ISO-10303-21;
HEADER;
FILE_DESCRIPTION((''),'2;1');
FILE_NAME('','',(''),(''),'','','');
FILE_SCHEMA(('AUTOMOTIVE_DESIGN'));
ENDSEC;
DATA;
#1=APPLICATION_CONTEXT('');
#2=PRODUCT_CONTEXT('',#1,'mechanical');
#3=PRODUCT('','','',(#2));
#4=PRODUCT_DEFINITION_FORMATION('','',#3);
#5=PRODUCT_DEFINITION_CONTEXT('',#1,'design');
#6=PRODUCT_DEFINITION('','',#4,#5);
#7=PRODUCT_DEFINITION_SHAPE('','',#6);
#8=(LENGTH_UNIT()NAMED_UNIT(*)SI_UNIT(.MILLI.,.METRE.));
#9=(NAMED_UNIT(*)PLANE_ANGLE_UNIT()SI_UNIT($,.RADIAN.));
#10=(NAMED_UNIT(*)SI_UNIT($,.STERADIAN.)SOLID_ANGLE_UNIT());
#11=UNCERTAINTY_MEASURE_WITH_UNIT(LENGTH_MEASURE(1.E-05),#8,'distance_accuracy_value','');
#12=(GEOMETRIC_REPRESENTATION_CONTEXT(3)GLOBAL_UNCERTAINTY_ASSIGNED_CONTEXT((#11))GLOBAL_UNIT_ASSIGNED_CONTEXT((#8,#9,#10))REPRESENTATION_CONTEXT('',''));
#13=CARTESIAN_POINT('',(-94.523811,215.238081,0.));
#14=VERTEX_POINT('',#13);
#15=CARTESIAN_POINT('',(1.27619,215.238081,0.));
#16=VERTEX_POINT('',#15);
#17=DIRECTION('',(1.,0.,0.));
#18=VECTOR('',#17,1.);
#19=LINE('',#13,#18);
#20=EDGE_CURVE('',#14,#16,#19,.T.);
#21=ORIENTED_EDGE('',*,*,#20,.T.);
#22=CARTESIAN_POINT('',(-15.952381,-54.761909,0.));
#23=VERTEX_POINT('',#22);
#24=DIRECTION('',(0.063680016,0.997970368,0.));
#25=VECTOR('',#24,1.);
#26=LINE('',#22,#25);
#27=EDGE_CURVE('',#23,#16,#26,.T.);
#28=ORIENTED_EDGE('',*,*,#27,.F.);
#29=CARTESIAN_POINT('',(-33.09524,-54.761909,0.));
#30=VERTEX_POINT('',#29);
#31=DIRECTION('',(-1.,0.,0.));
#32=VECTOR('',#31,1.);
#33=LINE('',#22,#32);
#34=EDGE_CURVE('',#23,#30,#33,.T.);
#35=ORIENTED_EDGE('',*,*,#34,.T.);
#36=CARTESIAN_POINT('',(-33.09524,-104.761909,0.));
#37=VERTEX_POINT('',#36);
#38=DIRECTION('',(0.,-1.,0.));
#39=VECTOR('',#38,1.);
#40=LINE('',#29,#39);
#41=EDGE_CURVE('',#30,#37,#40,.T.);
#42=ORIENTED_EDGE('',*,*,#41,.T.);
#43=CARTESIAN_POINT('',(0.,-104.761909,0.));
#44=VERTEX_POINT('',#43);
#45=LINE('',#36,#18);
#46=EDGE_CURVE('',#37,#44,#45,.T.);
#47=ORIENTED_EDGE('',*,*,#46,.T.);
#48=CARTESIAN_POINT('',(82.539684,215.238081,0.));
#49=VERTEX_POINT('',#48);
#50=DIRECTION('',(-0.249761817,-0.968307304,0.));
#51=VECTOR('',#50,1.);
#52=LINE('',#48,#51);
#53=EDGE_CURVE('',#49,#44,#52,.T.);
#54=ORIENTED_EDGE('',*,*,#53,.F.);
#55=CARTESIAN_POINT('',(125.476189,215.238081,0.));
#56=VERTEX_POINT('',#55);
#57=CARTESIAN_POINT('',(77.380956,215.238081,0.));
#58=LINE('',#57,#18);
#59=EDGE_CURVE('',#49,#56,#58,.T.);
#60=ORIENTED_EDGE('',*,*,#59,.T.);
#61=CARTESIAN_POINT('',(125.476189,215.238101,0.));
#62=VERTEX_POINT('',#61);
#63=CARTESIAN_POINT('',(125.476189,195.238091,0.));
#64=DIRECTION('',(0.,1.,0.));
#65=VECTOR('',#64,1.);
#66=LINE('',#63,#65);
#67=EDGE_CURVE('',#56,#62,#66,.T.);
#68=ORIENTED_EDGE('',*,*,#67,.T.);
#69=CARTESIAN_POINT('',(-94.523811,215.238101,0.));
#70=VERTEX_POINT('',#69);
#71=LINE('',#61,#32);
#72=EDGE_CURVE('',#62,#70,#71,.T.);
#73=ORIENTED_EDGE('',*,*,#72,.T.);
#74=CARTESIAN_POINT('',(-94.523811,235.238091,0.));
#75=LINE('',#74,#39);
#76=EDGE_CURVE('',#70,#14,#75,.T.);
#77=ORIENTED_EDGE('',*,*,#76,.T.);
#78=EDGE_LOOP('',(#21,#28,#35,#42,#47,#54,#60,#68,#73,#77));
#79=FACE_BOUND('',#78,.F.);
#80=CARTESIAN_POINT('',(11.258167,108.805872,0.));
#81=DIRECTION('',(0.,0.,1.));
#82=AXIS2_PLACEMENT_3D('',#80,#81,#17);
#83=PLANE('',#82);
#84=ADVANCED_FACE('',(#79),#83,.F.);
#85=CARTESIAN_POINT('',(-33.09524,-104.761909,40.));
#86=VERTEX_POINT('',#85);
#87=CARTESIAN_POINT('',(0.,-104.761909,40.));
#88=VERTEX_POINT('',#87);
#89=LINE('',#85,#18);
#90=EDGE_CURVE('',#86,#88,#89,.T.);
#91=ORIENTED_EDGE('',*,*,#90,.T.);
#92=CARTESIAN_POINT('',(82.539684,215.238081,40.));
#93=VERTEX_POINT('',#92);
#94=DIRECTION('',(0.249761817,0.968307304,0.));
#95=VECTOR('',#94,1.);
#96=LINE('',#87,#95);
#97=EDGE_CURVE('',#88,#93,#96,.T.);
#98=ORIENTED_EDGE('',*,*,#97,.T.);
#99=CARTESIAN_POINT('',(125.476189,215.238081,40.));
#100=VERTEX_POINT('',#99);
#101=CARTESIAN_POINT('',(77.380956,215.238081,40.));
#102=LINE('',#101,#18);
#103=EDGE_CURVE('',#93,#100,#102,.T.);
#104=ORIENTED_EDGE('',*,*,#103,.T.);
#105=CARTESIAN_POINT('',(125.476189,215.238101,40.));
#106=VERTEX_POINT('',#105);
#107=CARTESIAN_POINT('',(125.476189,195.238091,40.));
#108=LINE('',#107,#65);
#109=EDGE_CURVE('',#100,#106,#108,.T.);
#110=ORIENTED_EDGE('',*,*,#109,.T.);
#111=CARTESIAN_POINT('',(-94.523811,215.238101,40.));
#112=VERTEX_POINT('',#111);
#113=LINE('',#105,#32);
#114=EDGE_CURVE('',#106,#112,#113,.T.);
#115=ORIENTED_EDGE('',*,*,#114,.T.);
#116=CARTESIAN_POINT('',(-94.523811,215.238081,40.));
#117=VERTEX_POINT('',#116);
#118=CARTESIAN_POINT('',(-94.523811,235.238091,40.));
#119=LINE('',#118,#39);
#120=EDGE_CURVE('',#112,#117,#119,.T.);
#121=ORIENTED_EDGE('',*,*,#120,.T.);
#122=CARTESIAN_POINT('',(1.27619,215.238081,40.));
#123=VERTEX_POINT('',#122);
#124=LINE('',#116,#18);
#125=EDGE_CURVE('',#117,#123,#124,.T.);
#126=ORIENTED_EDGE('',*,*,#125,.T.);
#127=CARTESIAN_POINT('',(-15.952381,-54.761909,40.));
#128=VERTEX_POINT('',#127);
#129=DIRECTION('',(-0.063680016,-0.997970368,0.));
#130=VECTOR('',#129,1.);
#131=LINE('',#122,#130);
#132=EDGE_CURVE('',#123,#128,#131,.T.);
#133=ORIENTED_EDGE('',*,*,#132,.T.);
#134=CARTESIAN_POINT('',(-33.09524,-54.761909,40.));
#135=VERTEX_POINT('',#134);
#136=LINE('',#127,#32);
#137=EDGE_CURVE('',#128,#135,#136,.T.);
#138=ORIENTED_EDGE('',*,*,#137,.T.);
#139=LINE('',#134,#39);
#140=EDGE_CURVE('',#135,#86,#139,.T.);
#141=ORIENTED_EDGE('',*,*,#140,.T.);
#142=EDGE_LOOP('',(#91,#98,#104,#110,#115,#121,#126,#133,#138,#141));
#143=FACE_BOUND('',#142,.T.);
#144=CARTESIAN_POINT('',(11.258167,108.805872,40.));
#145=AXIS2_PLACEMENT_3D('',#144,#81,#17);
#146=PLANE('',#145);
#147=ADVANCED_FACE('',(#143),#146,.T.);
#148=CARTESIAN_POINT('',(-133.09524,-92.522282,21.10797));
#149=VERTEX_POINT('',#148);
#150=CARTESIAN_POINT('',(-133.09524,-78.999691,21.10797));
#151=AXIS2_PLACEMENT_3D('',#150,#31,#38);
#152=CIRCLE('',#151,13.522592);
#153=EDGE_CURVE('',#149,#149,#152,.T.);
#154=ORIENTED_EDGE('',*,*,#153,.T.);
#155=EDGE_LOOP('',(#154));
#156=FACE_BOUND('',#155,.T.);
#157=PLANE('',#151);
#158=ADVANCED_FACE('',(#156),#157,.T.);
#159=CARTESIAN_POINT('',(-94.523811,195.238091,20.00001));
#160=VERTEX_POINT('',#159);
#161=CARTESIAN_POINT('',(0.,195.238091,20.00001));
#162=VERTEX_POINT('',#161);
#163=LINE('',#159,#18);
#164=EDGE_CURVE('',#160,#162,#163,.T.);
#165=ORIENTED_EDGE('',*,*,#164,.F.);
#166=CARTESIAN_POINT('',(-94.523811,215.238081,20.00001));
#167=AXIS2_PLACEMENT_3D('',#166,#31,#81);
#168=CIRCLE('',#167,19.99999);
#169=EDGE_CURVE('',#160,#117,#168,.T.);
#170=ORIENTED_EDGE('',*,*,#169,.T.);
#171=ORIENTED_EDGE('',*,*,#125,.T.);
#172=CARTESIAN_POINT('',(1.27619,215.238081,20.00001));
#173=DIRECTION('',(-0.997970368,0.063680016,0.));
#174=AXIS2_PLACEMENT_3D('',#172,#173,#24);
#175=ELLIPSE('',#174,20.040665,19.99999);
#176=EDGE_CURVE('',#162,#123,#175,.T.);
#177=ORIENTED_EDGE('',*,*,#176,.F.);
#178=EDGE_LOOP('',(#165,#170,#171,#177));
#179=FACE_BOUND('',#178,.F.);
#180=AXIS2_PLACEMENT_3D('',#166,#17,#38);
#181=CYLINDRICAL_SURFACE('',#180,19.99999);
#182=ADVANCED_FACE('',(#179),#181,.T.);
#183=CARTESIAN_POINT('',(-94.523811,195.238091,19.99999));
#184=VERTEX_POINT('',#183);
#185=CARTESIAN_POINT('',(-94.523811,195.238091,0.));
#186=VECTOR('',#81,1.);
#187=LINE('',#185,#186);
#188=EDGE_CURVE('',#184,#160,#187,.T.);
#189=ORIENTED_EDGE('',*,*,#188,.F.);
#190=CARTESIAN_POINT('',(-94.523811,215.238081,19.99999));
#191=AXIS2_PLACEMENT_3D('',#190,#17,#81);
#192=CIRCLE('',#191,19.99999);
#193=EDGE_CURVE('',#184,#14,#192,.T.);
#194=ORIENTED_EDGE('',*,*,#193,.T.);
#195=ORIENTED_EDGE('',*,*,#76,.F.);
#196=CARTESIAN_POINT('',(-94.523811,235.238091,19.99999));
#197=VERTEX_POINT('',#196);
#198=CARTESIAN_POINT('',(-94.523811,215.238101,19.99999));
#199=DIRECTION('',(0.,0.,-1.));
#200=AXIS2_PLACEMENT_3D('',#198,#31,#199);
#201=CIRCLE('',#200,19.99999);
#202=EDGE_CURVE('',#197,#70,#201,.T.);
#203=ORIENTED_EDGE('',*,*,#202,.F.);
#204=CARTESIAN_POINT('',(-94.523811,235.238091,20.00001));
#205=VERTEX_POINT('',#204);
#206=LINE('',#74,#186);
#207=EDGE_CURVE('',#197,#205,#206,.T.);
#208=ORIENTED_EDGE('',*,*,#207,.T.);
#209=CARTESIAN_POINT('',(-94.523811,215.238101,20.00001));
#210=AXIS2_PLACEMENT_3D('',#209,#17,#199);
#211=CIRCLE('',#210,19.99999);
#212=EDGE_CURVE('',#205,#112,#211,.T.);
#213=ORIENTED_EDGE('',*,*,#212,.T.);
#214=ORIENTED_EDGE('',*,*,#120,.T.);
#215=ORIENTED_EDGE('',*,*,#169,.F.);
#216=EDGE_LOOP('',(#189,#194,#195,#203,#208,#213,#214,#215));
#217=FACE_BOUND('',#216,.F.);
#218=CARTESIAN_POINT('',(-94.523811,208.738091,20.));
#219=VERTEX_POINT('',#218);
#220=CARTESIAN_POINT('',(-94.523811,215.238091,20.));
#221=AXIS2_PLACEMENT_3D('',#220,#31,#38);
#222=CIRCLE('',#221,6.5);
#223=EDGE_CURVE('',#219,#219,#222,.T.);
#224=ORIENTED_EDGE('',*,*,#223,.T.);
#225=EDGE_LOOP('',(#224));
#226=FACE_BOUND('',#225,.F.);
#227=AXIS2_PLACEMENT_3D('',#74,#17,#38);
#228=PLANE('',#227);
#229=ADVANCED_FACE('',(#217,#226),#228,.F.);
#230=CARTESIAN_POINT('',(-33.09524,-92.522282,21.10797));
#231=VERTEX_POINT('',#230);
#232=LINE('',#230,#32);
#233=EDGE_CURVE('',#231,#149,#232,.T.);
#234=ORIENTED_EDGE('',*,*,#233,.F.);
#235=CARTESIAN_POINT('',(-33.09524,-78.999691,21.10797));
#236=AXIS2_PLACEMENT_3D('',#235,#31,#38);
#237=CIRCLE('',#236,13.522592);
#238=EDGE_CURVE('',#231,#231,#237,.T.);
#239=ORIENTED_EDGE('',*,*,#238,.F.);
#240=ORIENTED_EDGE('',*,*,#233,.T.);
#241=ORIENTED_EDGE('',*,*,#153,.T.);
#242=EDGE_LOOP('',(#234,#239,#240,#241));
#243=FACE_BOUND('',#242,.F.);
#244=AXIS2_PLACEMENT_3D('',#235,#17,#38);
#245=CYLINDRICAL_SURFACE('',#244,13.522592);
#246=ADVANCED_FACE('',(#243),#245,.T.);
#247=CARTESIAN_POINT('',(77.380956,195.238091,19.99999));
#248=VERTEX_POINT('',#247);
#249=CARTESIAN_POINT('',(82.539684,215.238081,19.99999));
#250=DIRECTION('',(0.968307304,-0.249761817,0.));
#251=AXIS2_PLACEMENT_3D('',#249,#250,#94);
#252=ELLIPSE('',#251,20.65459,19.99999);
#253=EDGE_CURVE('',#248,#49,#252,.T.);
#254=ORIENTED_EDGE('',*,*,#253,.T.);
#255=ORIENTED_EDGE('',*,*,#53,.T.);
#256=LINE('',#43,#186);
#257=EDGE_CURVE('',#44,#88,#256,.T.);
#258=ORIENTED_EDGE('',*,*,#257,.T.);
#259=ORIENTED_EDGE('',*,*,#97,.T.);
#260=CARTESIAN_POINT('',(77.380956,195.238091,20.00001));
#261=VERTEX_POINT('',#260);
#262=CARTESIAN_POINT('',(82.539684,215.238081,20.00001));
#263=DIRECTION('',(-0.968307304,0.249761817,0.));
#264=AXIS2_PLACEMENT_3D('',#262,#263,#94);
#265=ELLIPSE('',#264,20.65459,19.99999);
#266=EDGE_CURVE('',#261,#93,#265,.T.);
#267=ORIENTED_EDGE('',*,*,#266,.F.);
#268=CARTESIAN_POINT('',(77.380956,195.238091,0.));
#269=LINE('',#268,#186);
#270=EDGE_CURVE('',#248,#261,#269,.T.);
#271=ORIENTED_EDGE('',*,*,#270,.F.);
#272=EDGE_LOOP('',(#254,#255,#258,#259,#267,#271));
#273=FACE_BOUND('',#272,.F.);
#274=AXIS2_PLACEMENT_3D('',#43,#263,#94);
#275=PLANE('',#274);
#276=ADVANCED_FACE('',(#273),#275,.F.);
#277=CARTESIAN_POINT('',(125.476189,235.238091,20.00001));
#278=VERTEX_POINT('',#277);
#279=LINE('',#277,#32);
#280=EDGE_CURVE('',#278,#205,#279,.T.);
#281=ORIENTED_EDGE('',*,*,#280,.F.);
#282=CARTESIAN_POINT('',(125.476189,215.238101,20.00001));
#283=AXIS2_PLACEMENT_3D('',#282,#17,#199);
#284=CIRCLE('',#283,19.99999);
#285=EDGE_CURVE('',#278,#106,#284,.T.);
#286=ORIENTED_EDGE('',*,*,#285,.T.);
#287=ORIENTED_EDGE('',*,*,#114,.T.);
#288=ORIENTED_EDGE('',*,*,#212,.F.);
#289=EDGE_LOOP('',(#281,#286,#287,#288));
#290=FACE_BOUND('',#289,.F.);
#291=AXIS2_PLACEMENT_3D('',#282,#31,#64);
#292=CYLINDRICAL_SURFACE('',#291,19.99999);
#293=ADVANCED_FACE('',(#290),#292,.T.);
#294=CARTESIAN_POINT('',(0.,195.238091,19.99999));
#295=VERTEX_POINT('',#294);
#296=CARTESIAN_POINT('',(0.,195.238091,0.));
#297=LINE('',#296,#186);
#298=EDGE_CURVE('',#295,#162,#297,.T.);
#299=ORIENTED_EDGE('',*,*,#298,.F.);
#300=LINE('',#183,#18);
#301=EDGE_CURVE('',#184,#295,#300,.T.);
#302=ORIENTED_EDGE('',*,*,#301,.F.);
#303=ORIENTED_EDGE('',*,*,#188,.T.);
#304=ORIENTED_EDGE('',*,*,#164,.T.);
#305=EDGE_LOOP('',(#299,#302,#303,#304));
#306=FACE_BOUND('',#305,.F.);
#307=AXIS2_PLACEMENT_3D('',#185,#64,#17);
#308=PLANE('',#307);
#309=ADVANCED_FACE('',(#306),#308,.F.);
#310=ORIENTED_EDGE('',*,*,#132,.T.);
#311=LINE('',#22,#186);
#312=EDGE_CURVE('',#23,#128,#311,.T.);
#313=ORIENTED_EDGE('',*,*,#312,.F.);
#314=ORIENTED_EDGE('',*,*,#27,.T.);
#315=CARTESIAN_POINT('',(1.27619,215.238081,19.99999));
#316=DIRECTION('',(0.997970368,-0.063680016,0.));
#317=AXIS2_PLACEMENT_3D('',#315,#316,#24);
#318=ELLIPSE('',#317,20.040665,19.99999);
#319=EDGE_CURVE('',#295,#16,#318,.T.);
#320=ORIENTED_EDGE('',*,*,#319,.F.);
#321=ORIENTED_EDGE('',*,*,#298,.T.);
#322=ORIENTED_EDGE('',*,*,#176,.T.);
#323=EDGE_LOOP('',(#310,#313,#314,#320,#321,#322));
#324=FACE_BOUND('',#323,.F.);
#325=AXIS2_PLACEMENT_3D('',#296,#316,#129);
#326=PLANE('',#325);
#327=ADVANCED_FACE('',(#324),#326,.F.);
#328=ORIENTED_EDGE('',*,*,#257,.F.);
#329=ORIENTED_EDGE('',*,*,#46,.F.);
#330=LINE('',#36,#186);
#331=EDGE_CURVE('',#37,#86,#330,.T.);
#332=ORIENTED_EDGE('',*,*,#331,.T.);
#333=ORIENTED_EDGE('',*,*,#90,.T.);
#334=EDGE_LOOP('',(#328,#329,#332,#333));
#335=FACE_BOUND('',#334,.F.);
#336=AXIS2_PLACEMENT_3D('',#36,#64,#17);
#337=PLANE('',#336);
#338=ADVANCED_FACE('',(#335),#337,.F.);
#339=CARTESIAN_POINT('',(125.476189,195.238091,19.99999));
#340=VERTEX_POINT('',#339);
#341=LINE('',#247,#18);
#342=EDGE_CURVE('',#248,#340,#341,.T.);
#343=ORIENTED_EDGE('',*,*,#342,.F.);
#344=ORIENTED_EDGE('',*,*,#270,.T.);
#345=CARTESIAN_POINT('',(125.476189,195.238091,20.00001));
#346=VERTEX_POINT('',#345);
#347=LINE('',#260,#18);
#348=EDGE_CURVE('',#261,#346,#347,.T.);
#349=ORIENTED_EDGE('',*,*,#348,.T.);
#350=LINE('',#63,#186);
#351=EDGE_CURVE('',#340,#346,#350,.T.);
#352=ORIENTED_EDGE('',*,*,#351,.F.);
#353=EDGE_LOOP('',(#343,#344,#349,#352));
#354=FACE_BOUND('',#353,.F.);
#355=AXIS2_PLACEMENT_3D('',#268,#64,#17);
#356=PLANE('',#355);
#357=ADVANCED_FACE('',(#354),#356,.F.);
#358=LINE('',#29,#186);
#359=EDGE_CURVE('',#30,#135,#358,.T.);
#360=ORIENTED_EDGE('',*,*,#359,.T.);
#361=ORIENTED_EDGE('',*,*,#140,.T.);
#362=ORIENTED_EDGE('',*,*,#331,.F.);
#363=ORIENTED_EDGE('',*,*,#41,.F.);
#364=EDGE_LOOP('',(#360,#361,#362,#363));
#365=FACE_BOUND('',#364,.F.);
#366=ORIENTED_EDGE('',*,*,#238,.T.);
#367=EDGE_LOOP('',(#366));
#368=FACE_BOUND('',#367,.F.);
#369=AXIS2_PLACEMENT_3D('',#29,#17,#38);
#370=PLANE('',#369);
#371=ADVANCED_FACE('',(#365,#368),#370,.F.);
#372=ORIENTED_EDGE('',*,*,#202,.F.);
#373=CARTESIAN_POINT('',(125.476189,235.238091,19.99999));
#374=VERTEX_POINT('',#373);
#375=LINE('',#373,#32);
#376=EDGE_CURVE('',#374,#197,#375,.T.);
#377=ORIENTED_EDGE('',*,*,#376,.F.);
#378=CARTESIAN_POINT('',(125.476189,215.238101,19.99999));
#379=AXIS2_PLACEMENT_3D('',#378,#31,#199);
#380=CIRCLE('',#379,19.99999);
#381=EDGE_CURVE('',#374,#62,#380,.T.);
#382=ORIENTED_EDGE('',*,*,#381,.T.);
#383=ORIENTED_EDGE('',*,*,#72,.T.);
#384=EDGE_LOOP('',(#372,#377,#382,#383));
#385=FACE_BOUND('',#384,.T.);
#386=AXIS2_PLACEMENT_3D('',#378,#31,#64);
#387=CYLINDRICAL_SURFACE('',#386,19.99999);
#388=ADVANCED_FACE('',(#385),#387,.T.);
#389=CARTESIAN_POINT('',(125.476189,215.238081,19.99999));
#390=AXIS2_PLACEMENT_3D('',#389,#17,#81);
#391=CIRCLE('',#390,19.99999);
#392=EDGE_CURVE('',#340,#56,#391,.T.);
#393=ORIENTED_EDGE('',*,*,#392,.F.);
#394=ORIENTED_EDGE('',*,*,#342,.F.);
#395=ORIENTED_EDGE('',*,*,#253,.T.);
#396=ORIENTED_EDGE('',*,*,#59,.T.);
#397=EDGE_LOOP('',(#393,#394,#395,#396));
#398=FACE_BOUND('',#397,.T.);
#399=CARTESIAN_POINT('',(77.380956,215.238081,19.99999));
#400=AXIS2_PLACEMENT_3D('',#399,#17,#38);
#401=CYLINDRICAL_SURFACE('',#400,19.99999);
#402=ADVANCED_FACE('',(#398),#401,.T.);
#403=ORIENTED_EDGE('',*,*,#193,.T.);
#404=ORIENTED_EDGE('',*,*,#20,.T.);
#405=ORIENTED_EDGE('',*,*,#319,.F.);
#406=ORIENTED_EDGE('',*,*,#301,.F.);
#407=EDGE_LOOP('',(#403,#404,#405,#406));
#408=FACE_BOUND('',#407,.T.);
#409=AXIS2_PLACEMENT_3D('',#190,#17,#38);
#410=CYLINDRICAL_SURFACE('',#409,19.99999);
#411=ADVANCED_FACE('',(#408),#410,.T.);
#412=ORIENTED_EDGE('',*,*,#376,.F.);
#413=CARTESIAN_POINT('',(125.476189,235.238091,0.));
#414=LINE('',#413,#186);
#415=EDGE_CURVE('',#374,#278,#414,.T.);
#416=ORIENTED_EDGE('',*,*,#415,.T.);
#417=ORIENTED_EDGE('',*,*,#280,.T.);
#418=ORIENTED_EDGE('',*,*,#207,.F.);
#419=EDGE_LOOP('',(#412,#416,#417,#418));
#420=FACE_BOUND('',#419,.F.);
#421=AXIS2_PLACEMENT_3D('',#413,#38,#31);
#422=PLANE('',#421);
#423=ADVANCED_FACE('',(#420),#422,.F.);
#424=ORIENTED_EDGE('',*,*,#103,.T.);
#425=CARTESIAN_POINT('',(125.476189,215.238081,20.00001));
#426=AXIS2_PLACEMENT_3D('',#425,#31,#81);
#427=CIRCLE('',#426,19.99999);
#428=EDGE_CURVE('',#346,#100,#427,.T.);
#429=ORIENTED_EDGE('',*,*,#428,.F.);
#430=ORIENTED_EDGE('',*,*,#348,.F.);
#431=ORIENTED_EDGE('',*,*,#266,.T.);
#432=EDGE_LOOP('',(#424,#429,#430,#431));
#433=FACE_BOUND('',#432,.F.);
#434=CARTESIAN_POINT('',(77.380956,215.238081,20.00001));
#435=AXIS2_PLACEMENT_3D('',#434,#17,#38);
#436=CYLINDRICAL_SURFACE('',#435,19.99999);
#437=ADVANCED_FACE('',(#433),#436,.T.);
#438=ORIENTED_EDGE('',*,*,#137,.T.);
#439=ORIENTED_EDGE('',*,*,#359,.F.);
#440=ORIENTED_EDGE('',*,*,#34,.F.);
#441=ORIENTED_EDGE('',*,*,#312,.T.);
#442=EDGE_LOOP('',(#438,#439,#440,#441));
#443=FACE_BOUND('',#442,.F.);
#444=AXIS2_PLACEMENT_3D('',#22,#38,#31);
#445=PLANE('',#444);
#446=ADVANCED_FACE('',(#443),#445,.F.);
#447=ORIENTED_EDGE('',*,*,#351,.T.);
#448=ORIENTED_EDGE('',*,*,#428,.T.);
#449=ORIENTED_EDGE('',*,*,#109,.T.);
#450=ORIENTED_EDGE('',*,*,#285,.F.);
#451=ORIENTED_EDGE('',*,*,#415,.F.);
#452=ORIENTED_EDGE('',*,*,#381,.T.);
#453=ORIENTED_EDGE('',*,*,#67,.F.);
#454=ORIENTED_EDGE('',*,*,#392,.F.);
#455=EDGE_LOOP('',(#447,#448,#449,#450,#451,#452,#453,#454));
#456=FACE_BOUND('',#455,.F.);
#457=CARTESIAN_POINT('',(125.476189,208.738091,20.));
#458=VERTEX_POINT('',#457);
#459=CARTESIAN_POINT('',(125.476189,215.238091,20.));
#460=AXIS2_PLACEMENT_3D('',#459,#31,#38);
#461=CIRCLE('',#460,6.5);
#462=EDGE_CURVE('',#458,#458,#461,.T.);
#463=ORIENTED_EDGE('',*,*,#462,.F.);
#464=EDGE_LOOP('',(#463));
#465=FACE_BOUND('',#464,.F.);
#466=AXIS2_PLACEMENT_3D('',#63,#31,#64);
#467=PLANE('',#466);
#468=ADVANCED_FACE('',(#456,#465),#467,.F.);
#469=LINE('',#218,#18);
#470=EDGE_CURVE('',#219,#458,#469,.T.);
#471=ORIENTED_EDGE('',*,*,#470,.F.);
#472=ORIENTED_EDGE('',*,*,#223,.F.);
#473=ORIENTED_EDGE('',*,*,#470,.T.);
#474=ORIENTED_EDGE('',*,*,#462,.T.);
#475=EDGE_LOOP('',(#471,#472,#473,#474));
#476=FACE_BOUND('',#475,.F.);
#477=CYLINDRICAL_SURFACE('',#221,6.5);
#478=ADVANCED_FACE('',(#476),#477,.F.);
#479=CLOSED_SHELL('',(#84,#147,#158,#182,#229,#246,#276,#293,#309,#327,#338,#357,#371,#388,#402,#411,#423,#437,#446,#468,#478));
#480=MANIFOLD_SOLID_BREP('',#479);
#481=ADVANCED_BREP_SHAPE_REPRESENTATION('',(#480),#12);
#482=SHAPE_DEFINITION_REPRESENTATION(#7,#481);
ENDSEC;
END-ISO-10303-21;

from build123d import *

# Parameters (mm, degrees)
F1_DEPTH = 40
F2_R     = 19.99999
F3_R     = 6.5
F4_DEPTH = 220.001
F5_R     = 13.52259159
F6_DEPTH = 100


# Not quite as in the source:
# - a fillet or chamfer is up to 0.001 mm smaller than in the source, because OpenCascade refuses the exact size


with BuildPart() as f1:
    # F0 (on Top) → F1 (new body)
    with BuildSketch(Plane.XY):
        Polygon((125.4761886686, 235.2380912917), (-94.5238113314, 235.2380912917), (-94.5238113314, 195.2380912917), (0, 195.2380912917), (-15.9523813939, -54.7619087083), (-33.0952398201, -54.7619087083), (-33.0952398201, -104.7619087083), (0, -104.7619087083), (77.3809560928, 195.2380912917), (125.4761886686, 195.2380912917), align=None)
    extrude(amount=F1_DEPTH)

    # F2 (radius 20 in the source; OpenCascade refuses exactly that, so slightly less here)
    f2_edges = [f1.edges().sort_by_distance(p)[0] for p in [
        (15.476189, 235.238091, 40),
        (15.476189, 235.238091, 0),
        (-47.261906, 195.238091, 0),
        (-47.261906, 195.238091, 40),
        (101.428572, 195.238091, 0),
        (101.428572, 195.238091, 40),
    ]]
    fillet(f2_edges, radius=F2_R)

    # F3 (on face) → F4 (cut, through all)
    with BuildSketch(Plane(origin=(-94.5238113314, 0, 0), x_dir=(0, -1, 0), z_dir=(-1, 0, 0))):
        with Locations((-215.2380912917, 20)):
            Circle(F3_R)
    extrude(amount=-F4_DEPTH, mode=Mode.SUBTRACT)

    # F5 (on face) → F6 (join)
    with BuildSketch(Plane(origin=(-33.0952398201, 0, 0), x_dir=(0, -1, 0), z_dir=(-1, 0, 0))):
        with Locations((78.9996907115, 21.1079698056)):
            Circle(F5_R)
    extrude(amount=F6_DEPTH)


solid = f1.part
